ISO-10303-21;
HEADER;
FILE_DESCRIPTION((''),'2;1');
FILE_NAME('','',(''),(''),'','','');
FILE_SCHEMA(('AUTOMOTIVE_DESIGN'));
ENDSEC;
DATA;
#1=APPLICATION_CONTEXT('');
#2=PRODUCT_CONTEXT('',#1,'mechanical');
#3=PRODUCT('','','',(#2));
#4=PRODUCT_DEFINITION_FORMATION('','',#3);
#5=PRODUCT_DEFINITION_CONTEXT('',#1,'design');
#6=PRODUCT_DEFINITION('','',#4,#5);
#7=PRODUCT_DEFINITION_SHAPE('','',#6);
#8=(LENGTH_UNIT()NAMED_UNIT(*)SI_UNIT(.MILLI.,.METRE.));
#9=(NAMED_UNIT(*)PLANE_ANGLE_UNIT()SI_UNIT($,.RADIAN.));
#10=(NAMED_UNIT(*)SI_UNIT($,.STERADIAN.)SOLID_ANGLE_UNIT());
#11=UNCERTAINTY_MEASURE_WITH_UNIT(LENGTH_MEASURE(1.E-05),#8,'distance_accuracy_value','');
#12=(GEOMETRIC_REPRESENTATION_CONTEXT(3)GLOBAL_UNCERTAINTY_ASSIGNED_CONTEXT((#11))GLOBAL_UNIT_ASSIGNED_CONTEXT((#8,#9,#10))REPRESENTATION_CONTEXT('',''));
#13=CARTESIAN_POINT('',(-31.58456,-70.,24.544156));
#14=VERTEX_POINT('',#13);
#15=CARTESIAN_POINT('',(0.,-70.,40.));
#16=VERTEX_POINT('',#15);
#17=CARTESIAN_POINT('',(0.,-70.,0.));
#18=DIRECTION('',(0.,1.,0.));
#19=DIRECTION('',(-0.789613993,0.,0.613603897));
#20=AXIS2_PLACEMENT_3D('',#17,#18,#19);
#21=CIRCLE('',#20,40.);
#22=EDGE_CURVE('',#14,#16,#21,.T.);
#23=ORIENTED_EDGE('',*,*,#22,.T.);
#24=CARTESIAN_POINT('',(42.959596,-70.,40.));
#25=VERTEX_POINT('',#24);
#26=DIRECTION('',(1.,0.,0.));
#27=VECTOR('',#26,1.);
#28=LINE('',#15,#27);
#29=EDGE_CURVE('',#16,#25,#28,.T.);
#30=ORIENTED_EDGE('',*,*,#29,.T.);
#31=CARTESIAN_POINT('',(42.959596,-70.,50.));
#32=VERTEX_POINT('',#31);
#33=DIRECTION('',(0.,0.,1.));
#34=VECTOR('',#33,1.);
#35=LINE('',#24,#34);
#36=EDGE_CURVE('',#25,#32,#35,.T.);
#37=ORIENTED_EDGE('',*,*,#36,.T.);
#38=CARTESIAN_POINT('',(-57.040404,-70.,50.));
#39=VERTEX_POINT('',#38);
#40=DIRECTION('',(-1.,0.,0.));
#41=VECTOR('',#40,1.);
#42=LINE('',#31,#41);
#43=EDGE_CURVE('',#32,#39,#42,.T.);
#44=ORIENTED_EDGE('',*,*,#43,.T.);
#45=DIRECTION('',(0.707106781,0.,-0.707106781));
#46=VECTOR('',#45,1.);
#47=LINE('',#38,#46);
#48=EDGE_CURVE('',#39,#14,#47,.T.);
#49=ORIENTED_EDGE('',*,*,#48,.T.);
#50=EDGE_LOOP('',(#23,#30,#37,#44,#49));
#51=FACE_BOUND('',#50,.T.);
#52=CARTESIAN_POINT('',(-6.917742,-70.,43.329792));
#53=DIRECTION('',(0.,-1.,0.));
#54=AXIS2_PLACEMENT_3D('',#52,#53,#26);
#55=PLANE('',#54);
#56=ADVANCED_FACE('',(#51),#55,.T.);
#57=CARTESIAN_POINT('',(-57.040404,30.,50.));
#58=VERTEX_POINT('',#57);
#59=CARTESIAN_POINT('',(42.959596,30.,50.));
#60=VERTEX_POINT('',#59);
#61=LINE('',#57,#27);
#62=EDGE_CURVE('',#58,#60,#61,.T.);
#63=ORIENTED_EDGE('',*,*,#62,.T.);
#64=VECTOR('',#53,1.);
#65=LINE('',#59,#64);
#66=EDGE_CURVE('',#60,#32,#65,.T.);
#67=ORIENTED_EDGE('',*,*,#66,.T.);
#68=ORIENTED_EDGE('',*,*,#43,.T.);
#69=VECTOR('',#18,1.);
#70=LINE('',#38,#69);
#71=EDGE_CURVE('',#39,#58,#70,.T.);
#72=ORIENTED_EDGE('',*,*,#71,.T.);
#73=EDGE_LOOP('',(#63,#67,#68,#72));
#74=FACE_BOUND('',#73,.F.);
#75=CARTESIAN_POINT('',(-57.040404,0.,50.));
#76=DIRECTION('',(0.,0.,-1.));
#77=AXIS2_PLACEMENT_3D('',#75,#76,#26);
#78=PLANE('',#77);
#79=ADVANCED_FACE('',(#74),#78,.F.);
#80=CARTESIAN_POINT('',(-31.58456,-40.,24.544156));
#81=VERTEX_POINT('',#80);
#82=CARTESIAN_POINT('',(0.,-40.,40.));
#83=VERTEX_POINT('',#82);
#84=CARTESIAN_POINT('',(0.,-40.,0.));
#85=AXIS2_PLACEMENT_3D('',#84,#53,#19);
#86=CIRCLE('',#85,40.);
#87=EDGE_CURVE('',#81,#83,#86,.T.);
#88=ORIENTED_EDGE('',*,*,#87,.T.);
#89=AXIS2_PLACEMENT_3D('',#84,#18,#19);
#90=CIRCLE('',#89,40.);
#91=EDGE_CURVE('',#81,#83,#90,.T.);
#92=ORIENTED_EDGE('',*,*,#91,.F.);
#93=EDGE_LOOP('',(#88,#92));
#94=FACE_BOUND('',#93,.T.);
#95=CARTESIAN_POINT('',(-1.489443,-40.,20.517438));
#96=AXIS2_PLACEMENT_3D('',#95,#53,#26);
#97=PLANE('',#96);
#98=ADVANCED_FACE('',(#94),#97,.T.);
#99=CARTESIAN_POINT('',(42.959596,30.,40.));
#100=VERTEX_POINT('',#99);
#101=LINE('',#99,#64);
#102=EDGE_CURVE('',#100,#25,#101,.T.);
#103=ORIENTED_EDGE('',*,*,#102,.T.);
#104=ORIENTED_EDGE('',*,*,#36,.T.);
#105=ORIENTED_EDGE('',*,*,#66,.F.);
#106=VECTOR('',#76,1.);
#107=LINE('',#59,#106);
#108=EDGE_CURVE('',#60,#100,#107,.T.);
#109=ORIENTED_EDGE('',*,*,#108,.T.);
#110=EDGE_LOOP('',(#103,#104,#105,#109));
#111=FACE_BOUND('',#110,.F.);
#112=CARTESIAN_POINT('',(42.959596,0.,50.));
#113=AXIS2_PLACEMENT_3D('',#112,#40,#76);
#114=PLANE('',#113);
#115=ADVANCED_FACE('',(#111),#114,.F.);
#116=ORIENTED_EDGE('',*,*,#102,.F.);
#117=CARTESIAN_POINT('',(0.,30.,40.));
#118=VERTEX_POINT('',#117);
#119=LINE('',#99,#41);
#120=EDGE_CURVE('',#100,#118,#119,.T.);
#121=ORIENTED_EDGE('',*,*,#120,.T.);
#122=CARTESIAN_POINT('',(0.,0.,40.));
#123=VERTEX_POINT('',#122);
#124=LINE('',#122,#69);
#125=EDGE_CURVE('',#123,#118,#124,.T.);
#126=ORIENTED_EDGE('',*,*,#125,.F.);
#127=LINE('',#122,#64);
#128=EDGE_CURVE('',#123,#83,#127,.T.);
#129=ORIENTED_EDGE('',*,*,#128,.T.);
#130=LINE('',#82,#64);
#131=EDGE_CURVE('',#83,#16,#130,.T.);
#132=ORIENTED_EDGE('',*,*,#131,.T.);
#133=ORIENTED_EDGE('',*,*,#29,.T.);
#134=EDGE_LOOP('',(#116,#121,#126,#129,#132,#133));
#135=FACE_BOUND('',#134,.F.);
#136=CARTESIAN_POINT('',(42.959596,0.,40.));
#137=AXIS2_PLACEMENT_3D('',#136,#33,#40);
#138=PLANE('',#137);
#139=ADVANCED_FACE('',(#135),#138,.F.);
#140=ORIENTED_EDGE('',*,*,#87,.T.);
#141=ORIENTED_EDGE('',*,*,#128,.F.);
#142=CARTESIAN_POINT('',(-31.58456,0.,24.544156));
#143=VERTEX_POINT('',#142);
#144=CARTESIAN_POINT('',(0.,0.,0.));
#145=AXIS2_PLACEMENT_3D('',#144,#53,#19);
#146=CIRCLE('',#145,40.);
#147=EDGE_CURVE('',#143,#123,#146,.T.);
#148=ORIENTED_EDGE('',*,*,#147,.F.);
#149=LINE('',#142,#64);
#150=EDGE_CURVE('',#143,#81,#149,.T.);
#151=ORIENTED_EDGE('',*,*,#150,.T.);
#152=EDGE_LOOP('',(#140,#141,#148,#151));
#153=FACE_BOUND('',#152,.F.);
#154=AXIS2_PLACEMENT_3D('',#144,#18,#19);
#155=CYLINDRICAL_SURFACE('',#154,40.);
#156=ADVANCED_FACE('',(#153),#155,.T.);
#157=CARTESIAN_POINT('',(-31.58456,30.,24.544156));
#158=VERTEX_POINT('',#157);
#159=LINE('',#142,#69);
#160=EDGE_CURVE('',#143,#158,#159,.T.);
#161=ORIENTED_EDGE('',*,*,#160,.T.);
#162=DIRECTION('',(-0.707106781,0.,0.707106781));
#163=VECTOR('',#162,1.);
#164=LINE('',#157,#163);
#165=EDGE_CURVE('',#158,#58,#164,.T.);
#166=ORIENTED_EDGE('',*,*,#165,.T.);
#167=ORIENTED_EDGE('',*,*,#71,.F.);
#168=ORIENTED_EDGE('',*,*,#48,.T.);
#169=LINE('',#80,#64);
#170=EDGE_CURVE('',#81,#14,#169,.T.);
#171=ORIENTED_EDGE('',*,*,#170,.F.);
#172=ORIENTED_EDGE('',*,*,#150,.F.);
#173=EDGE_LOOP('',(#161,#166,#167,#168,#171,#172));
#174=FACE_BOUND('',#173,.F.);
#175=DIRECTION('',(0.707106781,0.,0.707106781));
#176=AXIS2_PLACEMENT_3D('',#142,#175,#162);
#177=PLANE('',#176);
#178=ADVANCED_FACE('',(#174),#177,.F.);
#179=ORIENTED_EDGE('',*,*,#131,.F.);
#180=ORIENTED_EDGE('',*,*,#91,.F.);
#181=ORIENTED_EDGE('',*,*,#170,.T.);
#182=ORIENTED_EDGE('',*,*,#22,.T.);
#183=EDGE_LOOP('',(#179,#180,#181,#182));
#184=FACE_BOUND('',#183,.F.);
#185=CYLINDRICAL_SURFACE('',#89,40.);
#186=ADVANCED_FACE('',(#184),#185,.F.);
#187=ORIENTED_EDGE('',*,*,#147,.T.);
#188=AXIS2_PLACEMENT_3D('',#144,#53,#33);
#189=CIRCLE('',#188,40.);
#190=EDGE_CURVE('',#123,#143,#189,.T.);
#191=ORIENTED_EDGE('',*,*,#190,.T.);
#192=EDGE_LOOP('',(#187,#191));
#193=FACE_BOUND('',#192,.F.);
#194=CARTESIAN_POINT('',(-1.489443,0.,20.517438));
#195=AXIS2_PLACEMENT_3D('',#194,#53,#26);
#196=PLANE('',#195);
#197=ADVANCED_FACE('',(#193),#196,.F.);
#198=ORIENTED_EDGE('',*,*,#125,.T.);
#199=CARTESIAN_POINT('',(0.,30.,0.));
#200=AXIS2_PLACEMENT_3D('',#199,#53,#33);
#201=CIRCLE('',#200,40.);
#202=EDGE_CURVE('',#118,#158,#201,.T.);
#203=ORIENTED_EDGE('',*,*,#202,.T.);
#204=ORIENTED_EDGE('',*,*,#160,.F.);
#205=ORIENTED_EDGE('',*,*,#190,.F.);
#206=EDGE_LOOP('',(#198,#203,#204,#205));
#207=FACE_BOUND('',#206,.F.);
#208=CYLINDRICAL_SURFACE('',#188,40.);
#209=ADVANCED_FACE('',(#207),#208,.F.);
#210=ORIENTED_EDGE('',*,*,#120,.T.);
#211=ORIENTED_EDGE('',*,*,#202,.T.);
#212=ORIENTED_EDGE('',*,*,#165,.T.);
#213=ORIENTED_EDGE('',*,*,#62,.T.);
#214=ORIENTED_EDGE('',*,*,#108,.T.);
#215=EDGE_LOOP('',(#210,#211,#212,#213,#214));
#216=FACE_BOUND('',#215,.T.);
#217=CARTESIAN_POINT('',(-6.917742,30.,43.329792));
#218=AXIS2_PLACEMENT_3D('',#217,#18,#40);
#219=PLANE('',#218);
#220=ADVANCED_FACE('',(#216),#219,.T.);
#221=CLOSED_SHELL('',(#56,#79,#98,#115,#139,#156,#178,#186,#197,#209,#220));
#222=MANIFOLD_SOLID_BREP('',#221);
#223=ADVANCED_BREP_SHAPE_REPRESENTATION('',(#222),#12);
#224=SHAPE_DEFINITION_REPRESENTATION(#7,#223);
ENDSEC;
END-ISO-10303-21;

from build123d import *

# Parameters (mm, degrees)
F1_DEPTH = 40
F3_DEPTH = 30
F5_DEPTH = 30


with BuildPart() as f1:
    # F0 (on Front) → F1 (new body)
    with BuildSketch(Plane.XZ):
        with BuildLine():
            Line((-57.0404038358, 50), (-31.5845597131, 24.5441558773))
            ThreePointArc((-31.5845597131, 24.5441558773), (17.5817201222, -35.9288619016), (0, 40))
            Line((0, 40), (42.9595961642, 40))
            Line((42.9595961642, 40), (42.9595961642, 50))
            Line((42.9595961642, 50), (-57.0404038358, 50))
        make_face()
    extrude(amount=F1_DEPTH)

    # F2 (on face) → F3 (join)
    with BuildSketch(Plane.XZ.offset(40)):
        with BuildLine():
            ThreePointArc((-31.5845597131, 24.5441558773), (-17.5817201222, 35.9288619016), (0, 40))
            Line((0, 40), (42.9595961642, 40))
            Line((42.9595961642, 40), (42.9595961642, 50))
            Line((42.9595961642, 50), (-57.0404038358, 50))
            Line((-57.0404038358, 50), (-31.5845597131, 24.5441558773))
        make_face()
    extrude(amount=F3_DEPTH)

    # F4 (on face) → F5 (join)
    with BuildSketch(Plane(origin=(0, 0, 0), x_dir=(-1, 0, 0), z_dir=(0, 1, 0))):
        with BuildLine():
            ThreePointArc((0, 40), (17.5817201222, 35.9288619016), (31.5845597131, 24.5441558773))
            Line((31.5845597131, 24.5441558773), (57.0404038358, 50))
            Line((57.0404038358, 50), (-42.9595961642, 50))
            Line((-42.9595961642, 50), (-42.9595961642, 40))
            Line((-42.9595961642, 40), (0, 40))
        make_face()
    extrude(amount=F5_DEPTH)


solid = f1.part
